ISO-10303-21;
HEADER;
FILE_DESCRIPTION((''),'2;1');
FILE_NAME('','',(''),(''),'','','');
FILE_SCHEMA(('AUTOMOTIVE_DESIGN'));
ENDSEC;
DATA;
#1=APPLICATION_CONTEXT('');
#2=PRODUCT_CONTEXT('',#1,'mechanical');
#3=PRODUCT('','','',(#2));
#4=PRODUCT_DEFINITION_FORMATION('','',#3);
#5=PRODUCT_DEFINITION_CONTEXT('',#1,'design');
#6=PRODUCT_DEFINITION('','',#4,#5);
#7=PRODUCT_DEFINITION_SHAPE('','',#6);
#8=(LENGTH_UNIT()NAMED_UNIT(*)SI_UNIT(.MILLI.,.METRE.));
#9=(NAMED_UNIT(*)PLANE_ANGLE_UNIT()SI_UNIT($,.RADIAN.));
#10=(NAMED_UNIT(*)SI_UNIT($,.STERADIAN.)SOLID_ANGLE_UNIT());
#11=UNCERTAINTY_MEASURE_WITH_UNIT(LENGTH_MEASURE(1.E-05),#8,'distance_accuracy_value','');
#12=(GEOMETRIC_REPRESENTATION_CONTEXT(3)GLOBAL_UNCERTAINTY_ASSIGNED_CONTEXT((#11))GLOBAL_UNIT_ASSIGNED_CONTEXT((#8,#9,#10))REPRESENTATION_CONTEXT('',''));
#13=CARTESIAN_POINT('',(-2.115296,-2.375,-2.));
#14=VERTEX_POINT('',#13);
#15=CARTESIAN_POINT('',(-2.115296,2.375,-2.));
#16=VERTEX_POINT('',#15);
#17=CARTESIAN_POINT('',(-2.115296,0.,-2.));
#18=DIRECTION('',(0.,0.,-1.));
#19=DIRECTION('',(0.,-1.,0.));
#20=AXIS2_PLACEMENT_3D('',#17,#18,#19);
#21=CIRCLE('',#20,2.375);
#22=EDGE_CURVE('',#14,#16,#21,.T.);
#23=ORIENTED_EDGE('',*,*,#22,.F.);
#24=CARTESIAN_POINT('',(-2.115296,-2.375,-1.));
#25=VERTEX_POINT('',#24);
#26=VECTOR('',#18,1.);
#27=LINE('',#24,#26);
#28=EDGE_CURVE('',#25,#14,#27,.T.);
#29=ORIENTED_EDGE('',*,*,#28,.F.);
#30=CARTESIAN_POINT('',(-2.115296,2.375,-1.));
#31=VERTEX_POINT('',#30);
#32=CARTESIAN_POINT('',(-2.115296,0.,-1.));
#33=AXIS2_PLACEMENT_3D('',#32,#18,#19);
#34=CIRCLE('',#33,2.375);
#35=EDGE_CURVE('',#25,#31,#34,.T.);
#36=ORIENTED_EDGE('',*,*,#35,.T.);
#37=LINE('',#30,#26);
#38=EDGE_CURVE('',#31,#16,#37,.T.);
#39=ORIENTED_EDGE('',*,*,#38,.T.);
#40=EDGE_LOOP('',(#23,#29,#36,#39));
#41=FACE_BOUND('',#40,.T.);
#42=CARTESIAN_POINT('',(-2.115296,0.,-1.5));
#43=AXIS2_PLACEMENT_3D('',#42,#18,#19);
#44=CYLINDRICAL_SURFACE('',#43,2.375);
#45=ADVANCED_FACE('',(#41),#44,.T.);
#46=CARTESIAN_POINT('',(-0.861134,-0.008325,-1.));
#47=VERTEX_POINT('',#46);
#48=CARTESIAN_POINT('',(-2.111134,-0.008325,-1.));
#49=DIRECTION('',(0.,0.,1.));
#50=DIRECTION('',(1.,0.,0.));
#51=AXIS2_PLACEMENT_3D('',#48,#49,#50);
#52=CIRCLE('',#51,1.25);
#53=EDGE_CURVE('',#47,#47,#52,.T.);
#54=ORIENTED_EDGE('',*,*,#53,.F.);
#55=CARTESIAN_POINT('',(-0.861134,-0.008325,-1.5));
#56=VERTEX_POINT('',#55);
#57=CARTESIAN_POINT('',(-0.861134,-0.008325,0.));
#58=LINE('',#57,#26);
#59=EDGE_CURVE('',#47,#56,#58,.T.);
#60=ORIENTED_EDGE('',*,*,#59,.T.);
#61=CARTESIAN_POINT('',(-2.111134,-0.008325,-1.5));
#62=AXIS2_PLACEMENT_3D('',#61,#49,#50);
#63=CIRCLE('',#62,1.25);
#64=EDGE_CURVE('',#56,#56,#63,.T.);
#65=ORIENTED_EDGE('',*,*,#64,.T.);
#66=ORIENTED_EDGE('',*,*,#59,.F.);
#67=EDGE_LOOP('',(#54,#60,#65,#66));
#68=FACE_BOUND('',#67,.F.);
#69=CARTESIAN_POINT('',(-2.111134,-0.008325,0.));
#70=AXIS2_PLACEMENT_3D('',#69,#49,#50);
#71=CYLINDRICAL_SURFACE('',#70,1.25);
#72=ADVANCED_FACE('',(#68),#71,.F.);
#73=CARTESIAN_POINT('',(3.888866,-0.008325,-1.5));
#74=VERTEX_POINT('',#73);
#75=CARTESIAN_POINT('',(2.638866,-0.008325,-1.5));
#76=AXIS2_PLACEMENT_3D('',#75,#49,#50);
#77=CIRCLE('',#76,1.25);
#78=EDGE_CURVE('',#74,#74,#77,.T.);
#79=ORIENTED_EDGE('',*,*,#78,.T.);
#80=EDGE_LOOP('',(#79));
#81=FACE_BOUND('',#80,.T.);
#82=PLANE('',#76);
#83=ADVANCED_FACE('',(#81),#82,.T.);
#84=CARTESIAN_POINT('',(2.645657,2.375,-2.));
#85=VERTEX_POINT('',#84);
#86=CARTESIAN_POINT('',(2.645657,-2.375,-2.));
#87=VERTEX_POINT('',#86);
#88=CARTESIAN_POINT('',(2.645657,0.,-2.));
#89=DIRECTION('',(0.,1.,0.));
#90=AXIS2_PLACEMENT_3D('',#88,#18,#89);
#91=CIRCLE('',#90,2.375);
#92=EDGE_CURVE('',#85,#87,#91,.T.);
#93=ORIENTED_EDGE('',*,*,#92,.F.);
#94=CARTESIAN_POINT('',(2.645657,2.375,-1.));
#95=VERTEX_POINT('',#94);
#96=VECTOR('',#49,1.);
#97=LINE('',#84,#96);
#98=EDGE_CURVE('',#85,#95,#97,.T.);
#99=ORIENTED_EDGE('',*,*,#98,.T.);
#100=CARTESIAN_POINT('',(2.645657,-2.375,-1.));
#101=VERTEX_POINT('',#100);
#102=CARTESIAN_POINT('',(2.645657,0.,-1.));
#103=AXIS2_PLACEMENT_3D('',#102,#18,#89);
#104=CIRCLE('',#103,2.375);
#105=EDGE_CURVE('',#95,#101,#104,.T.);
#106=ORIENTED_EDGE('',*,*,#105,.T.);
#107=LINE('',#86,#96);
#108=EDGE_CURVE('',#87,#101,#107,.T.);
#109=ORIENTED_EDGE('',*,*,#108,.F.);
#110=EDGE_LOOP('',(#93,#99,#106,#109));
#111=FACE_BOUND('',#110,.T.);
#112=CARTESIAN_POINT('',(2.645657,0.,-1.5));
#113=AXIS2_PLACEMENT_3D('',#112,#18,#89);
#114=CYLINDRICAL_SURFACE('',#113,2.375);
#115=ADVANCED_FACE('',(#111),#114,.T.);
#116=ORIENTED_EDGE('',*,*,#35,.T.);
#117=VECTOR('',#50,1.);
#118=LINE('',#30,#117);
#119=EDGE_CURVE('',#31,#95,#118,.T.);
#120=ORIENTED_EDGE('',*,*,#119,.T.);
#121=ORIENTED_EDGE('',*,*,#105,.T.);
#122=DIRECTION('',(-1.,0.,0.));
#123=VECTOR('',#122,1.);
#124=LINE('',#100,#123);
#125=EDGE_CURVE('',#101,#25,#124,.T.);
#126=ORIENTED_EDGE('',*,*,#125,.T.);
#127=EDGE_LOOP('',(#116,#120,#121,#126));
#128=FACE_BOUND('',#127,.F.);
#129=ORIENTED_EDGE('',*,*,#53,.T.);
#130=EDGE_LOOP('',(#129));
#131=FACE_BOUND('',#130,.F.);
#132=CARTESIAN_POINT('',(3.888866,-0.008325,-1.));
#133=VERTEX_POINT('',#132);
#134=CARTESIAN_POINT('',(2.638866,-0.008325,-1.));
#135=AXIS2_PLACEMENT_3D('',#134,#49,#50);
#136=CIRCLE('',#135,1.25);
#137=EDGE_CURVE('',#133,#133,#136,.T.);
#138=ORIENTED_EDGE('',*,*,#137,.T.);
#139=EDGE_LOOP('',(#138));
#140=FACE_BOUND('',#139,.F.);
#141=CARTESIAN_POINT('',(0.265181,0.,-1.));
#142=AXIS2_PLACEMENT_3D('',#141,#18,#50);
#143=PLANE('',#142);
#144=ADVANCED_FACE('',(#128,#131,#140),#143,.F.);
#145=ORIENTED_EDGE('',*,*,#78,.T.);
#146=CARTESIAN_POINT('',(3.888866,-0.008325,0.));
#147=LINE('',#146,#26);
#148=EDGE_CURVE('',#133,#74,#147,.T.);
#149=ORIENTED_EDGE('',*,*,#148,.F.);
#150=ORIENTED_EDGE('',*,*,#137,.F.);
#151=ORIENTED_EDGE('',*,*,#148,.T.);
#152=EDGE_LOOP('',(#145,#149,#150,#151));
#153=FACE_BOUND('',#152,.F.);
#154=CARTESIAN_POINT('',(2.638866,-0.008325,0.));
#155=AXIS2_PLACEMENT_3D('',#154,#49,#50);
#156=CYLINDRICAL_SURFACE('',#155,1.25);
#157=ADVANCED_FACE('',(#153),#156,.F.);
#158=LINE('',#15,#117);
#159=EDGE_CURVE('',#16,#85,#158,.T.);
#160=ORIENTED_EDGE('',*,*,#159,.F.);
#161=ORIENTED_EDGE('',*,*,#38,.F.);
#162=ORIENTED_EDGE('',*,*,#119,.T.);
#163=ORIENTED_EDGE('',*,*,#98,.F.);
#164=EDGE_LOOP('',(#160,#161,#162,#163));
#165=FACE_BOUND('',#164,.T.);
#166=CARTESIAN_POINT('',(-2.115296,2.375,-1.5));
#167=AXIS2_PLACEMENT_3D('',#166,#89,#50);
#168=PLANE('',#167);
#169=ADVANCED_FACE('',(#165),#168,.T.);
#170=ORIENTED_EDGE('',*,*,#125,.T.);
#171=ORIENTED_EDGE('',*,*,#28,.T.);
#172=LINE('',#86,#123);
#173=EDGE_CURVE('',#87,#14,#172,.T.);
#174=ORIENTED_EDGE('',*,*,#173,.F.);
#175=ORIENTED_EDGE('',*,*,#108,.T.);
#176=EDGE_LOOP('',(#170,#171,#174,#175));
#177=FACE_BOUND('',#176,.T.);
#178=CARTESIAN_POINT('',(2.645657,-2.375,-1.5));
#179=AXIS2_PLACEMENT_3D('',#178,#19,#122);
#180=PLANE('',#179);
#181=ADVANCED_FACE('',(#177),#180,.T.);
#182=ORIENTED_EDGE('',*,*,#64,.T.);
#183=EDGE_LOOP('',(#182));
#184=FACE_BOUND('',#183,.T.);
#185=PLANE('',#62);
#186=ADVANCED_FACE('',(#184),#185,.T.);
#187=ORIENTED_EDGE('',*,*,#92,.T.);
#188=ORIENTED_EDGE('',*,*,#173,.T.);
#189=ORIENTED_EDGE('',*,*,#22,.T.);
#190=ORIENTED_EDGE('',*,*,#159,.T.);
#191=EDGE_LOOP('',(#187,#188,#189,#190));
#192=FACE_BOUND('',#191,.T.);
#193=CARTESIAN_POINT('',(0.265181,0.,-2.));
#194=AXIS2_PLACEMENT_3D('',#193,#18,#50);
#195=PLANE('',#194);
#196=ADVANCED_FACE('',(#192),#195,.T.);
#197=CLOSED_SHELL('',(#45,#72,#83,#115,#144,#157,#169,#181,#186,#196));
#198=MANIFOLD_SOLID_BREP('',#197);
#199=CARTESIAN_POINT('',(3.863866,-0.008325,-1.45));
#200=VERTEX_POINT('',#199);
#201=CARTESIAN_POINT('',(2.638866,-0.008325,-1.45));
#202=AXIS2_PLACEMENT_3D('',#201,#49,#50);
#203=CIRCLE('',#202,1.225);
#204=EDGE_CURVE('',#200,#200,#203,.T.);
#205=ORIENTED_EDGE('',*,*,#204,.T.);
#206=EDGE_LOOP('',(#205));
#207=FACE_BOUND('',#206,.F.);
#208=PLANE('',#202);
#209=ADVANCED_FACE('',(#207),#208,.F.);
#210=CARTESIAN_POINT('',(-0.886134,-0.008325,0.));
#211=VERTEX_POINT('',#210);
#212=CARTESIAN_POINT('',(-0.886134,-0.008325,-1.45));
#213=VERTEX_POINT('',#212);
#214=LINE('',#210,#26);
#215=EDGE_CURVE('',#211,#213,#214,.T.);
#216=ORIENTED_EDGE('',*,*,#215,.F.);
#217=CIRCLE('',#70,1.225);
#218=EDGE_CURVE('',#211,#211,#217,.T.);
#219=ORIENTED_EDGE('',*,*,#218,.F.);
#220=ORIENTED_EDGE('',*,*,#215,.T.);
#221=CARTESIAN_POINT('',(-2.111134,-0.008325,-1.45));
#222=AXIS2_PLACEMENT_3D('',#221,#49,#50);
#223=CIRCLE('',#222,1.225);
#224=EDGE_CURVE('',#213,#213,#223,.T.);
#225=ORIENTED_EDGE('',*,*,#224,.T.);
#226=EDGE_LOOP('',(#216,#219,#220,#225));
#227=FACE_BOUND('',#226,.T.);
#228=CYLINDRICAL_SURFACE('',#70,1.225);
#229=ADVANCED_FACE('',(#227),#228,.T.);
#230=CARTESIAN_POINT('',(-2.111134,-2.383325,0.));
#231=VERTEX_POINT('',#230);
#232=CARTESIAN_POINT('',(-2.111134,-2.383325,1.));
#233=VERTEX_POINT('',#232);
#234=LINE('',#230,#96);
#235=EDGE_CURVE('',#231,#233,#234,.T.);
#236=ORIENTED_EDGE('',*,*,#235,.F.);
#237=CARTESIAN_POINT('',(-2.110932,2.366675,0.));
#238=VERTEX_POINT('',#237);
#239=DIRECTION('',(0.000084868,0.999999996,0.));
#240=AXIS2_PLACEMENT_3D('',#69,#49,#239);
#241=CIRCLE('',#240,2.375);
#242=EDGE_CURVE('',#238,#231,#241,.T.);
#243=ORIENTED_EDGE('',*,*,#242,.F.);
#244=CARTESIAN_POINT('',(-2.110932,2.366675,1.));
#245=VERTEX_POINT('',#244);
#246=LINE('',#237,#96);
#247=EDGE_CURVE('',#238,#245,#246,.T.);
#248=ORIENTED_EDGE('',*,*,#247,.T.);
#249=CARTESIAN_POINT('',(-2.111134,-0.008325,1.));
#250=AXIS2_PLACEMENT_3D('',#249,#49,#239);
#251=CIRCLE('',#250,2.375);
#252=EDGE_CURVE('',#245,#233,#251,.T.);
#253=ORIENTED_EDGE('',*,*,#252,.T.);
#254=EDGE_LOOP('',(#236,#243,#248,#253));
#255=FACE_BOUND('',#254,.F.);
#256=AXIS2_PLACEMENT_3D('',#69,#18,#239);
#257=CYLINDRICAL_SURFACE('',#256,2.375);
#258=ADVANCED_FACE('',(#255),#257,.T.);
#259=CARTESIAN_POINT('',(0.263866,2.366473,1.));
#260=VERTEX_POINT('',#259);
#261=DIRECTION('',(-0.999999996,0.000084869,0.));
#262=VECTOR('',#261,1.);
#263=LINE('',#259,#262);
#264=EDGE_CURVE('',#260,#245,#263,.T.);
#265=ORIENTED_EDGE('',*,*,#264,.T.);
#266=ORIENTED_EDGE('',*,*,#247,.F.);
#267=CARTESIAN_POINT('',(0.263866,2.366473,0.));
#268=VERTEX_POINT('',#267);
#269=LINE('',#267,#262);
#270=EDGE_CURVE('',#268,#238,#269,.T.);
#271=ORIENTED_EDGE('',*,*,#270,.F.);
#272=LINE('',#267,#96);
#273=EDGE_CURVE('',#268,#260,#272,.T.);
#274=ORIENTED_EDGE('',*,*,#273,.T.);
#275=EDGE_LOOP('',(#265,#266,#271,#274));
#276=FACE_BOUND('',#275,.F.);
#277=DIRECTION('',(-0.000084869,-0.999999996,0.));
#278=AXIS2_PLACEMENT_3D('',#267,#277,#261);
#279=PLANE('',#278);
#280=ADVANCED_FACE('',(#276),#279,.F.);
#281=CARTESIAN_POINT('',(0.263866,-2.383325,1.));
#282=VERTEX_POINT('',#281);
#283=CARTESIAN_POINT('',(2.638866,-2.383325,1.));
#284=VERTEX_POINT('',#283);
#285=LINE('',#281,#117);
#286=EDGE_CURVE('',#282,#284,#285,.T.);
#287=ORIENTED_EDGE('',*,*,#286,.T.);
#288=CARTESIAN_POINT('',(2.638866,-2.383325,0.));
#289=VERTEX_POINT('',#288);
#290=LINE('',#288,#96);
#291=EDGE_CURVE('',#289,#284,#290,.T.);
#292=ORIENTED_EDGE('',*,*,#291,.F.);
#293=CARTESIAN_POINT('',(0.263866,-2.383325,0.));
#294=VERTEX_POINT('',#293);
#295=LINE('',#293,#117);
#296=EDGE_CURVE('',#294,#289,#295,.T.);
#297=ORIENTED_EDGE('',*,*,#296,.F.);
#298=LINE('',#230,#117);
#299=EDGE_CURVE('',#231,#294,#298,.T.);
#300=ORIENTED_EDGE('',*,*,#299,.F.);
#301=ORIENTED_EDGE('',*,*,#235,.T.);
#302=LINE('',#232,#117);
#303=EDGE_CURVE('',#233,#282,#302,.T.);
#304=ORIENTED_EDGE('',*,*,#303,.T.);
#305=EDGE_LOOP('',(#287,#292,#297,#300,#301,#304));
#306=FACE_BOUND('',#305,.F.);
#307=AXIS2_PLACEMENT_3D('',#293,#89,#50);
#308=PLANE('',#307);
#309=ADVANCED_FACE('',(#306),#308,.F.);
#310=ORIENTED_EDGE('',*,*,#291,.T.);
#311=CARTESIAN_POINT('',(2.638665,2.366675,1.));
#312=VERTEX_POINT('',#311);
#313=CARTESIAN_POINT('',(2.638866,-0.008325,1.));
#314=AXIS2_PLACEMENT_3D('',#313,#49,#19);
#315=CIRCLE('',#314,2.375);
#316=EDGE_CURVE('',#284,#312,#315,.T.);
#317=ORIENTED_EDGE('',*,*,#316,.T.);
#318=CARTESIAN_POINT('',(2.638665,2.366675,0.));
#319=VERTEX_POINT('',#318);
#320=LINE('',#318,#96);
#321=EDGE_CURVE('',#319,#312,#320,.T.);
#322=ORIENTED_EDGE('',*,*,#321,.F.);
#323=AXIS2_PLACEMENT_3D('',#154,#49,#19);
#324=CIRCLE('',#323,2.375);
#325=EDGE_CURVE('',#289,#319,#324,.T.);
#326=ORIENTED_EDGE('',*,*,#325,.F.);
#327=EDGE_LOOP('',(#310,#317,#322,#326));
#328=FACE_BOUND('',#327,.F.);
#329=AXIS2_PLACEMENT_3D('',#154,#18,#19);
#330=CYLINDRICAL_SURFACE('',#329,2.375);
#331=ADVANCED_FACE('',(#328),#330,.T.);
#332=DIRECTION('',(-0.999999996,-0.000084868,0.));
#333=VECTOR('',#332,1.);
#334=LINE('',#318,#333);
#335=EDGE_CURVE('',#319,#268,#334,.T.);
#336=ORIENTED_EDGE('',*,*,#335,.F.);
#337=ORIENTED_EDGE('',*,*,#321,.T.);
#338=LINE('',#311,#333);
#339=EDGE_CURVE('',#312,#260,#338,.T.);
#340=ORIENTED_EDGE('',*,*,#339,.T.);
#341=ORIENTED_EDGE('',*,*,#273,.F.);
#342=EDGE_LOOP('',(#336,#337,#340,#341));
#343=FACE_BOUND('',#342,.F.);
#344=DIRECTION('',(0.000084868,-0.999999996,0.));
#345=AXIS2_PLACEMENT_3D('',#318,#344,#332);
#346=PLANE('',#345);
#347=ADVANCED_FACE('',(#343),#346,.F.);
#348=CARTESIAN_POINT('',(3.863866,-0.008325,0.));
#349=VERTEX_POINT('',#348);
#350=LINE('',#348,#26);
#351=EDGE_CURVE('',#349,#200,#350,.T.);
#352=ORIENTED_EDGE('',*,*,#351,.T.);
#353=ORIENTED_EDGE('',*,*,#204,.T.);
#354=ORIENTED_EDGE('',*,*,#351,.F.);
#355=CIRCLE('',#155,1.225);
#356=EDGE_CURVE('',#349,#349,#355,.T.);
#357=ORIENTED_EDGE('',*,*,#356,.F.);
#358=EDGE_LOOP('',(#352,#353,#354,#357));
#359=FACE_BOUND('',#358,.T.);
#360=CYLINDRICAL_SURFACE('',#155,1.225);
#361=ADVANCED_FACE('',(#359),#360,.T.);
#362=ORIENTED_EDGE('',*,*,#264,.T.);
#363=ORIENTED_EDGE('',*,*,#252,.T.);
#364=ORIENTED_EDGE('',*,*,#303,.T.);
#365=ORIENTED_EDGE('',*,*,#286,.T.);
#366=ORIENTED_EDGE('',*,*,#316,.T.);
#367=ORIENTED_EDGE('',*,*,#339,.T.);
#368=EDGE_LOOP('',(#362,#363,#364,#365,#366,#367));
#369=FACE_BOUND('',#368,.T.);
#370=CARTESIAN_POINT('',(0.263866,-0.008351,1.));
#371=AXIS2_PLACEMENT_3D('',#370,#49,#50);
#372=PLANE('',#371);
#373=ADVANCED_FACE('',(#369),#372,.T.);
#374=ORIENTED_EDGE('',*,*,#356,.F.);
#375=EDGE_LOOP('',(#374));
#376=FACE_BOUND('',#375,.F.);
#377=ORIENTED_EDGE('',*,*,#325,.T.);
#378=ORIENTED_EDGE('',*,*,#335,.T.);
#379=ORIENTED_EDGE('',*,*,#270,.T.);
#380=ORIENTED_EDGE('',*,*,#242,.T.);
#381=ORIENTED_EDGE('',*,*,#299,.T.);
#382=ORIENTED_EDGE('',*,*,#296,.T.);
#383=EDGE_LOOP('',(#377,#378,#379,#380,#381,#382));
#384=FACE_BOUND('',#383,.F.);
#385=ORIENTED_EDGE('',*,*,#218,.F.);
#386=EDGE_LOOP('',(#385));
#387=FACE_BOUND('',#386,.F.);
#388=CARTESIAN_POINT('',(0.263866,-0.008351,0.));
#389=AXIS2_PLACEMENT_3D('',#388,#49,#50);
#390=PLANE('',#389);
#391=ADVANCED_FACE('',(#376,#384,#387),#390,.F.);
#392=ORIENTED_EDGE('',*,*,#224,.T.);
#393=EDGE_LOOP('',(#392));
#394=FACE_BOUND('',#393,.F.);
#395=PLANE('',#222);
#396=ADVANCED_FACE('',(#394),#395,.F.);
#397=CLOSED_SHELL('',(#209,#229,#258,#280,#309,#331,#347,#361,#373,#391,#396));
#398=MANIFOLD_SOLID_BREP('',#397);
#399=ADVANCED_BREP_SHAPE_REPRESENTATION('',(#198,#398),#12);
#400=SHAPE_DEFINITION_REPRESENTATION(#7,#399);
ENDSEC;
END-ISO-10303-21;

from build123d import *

# Parameters (mm, degrees)
F0_R          = 1.25
F0_R_2        = 1.225
F1_DEPTH      = 1
F2_DEPTH      = 1.5
F3_R          = 1.225
F4_DEPTH      = 0.5
F4_DEPTH_BACK = 0.5
F5_DEPTH      = 1.5
F6_DEPTH      = 1.45


with BuildPart() as f1:
    # F0 (on Top) → F1 (new body)
    with BuildSketch(Plane.XY):
        with BuildLine():
            Line((0.2638664927, -2.3833251961), (2.6388664927, -2.3833251961))
            ThreePointArc((2.6388664927, -2.3833251961), (5.0138664949, -0.0082244105), (2.6386649301, 2.3666748038))
            Line((2.6386649301, 2.3666748038), (0.2638664927, 2.3664732583))
            Line((0.2638664927, 2.3664732497), (-2.1109319446, 2.3666747953))
            ThreePointArc((-2.1109319446, 2.3666747953), (-4.4861335051, -0.0082244148), (-2.1111335073, -2.3833251962))
            Line((-2.1111335073, -2.3833251962), (0.2638664927, -2.3833251962))
        make_face()
        with Locations((-2.1111335073, -0.0083251962)):
            Circle(F0_R, mode=Mode.SUBTRACT)
        with Locations((2.6388664927, -0.0083251919)):
            Circle(F0_R, mode=Mode.SUBTRACT)
        with Locations((2.6388664927, -0.0083251919)):
            Circle(F0_R)
        with Locations((2.6388664927, -0.0083251919)):
            Circle(F0_R_2, mode=Mode.SUBTRACT)
        with Locations((-2.1111335073, -0.0083251962)):
            Circle(F0_R)
        with Locations((-2.1111335073, -0.0083251962)):
            Circle(F0_R_2, mode=Mode.SUBTRACT)
        with Locations((-2.1111335073, -0.0083251962)):
            Circle(F0_R_2)
        with Locations((2.6388664927, -0.0083251919)):
            Circle(F0_R_2)
    extrude(amount=F1_DEPTH)

    # F0 (on Top) → F2 (join)
    with BuildSketch(Plane.XY):
        with Locations((2.6388664927, -0.0083251919)):
            Circle(F0_R_2)
        with Locations((-2.1111335073, -0.0083251962)):
            Circle(F0_R_2)
    extrude(amount=-F2_DEPTH)


with BuildPart() as f4:
    # F3 (on face) → F4 (new body, two sides)
    with BuildSketch(Plane(origin=(0, 0, -1.5), x_dir=(1, 0, 0), z_dir=(0, 0, -1))) as f4_sk:
        with BuildLine():
            Line((2.6456569321, 2.375), (-2.1152956275, 2.375))
            ThreePointArc((-2.1152956275, 2.375), (-4.4902956275, 0), (-2.1152956275, -2.375))
            Line((-2.1152956275, -2.375), (2.6456569321, -2.375))
            ThreePointArc((2.6456569321, -2.375), (5.0206569321, 0), (2.6456569321, 2.375))
        make_face()
        with Locations((-2.1111335073, 0.0083251962)):
            Circle(F3_R, mode=Mode.SUBTRACT)
        with Locations((-2.1111335073, 0.0083251962)):
            Circle(F3_R)
    extrude(amount=F4_DEPTH)
    extrude(f4_sk.sketch, amount=-F4_DEPTH_BACK)


with BuildPart() as f5_tool:
    # F0 (on Top) → F5 (new body)
    with BuildSketch(Plane.XY):
        with Locations((2.6388664927, -0.0083251919)):
            Circle(F0_R)
        with Locations((2.6388664927, -0.0083251919)):
            Circle(F0_R_2, mode=Mode.SUBTRACT)
        with Locations((-2.1111335073, -0.0083251962)):
            Circle(F0_R)
        with Locations((-2.1111335073, -0.0083251962)):
            Circle(F0_R_2, mode=Mode.SUBTRACT)
        with Locations((2.6388664927, -0.0083251919)):
            Circle(F0_R_2)
        with Locations((-2.1111335073, -0.0083251962)):
            Circle(F0_R_2)
    extrude(amount=-F5_DEPTH)


with BuildPart() as f1_1:
    add(f1.part)

    # F5: cut by f5_tool
    add(f5_tool.part, mode=Mode.SUBTRACT)

    # F0 (on Top) → F6 (join)
    with BuildSketch(Plane.XY):
        with Locations((2.6388664927, -0.0083251919)):
            Circle(F0_R_2)
        with Locations((-2.1111335073, -0.0083251962)):
            Circle(F0_R_2)
    extrude(amount=-F6_DEPTH)


with BuildPart() as f4_1:
    add(f4.part)

    # F5: cut by f5_tool
    add(f5_tool.part, mode=Mode.SUBTRACT)


solid = Compound([f1_1.part, f4_1.part])
